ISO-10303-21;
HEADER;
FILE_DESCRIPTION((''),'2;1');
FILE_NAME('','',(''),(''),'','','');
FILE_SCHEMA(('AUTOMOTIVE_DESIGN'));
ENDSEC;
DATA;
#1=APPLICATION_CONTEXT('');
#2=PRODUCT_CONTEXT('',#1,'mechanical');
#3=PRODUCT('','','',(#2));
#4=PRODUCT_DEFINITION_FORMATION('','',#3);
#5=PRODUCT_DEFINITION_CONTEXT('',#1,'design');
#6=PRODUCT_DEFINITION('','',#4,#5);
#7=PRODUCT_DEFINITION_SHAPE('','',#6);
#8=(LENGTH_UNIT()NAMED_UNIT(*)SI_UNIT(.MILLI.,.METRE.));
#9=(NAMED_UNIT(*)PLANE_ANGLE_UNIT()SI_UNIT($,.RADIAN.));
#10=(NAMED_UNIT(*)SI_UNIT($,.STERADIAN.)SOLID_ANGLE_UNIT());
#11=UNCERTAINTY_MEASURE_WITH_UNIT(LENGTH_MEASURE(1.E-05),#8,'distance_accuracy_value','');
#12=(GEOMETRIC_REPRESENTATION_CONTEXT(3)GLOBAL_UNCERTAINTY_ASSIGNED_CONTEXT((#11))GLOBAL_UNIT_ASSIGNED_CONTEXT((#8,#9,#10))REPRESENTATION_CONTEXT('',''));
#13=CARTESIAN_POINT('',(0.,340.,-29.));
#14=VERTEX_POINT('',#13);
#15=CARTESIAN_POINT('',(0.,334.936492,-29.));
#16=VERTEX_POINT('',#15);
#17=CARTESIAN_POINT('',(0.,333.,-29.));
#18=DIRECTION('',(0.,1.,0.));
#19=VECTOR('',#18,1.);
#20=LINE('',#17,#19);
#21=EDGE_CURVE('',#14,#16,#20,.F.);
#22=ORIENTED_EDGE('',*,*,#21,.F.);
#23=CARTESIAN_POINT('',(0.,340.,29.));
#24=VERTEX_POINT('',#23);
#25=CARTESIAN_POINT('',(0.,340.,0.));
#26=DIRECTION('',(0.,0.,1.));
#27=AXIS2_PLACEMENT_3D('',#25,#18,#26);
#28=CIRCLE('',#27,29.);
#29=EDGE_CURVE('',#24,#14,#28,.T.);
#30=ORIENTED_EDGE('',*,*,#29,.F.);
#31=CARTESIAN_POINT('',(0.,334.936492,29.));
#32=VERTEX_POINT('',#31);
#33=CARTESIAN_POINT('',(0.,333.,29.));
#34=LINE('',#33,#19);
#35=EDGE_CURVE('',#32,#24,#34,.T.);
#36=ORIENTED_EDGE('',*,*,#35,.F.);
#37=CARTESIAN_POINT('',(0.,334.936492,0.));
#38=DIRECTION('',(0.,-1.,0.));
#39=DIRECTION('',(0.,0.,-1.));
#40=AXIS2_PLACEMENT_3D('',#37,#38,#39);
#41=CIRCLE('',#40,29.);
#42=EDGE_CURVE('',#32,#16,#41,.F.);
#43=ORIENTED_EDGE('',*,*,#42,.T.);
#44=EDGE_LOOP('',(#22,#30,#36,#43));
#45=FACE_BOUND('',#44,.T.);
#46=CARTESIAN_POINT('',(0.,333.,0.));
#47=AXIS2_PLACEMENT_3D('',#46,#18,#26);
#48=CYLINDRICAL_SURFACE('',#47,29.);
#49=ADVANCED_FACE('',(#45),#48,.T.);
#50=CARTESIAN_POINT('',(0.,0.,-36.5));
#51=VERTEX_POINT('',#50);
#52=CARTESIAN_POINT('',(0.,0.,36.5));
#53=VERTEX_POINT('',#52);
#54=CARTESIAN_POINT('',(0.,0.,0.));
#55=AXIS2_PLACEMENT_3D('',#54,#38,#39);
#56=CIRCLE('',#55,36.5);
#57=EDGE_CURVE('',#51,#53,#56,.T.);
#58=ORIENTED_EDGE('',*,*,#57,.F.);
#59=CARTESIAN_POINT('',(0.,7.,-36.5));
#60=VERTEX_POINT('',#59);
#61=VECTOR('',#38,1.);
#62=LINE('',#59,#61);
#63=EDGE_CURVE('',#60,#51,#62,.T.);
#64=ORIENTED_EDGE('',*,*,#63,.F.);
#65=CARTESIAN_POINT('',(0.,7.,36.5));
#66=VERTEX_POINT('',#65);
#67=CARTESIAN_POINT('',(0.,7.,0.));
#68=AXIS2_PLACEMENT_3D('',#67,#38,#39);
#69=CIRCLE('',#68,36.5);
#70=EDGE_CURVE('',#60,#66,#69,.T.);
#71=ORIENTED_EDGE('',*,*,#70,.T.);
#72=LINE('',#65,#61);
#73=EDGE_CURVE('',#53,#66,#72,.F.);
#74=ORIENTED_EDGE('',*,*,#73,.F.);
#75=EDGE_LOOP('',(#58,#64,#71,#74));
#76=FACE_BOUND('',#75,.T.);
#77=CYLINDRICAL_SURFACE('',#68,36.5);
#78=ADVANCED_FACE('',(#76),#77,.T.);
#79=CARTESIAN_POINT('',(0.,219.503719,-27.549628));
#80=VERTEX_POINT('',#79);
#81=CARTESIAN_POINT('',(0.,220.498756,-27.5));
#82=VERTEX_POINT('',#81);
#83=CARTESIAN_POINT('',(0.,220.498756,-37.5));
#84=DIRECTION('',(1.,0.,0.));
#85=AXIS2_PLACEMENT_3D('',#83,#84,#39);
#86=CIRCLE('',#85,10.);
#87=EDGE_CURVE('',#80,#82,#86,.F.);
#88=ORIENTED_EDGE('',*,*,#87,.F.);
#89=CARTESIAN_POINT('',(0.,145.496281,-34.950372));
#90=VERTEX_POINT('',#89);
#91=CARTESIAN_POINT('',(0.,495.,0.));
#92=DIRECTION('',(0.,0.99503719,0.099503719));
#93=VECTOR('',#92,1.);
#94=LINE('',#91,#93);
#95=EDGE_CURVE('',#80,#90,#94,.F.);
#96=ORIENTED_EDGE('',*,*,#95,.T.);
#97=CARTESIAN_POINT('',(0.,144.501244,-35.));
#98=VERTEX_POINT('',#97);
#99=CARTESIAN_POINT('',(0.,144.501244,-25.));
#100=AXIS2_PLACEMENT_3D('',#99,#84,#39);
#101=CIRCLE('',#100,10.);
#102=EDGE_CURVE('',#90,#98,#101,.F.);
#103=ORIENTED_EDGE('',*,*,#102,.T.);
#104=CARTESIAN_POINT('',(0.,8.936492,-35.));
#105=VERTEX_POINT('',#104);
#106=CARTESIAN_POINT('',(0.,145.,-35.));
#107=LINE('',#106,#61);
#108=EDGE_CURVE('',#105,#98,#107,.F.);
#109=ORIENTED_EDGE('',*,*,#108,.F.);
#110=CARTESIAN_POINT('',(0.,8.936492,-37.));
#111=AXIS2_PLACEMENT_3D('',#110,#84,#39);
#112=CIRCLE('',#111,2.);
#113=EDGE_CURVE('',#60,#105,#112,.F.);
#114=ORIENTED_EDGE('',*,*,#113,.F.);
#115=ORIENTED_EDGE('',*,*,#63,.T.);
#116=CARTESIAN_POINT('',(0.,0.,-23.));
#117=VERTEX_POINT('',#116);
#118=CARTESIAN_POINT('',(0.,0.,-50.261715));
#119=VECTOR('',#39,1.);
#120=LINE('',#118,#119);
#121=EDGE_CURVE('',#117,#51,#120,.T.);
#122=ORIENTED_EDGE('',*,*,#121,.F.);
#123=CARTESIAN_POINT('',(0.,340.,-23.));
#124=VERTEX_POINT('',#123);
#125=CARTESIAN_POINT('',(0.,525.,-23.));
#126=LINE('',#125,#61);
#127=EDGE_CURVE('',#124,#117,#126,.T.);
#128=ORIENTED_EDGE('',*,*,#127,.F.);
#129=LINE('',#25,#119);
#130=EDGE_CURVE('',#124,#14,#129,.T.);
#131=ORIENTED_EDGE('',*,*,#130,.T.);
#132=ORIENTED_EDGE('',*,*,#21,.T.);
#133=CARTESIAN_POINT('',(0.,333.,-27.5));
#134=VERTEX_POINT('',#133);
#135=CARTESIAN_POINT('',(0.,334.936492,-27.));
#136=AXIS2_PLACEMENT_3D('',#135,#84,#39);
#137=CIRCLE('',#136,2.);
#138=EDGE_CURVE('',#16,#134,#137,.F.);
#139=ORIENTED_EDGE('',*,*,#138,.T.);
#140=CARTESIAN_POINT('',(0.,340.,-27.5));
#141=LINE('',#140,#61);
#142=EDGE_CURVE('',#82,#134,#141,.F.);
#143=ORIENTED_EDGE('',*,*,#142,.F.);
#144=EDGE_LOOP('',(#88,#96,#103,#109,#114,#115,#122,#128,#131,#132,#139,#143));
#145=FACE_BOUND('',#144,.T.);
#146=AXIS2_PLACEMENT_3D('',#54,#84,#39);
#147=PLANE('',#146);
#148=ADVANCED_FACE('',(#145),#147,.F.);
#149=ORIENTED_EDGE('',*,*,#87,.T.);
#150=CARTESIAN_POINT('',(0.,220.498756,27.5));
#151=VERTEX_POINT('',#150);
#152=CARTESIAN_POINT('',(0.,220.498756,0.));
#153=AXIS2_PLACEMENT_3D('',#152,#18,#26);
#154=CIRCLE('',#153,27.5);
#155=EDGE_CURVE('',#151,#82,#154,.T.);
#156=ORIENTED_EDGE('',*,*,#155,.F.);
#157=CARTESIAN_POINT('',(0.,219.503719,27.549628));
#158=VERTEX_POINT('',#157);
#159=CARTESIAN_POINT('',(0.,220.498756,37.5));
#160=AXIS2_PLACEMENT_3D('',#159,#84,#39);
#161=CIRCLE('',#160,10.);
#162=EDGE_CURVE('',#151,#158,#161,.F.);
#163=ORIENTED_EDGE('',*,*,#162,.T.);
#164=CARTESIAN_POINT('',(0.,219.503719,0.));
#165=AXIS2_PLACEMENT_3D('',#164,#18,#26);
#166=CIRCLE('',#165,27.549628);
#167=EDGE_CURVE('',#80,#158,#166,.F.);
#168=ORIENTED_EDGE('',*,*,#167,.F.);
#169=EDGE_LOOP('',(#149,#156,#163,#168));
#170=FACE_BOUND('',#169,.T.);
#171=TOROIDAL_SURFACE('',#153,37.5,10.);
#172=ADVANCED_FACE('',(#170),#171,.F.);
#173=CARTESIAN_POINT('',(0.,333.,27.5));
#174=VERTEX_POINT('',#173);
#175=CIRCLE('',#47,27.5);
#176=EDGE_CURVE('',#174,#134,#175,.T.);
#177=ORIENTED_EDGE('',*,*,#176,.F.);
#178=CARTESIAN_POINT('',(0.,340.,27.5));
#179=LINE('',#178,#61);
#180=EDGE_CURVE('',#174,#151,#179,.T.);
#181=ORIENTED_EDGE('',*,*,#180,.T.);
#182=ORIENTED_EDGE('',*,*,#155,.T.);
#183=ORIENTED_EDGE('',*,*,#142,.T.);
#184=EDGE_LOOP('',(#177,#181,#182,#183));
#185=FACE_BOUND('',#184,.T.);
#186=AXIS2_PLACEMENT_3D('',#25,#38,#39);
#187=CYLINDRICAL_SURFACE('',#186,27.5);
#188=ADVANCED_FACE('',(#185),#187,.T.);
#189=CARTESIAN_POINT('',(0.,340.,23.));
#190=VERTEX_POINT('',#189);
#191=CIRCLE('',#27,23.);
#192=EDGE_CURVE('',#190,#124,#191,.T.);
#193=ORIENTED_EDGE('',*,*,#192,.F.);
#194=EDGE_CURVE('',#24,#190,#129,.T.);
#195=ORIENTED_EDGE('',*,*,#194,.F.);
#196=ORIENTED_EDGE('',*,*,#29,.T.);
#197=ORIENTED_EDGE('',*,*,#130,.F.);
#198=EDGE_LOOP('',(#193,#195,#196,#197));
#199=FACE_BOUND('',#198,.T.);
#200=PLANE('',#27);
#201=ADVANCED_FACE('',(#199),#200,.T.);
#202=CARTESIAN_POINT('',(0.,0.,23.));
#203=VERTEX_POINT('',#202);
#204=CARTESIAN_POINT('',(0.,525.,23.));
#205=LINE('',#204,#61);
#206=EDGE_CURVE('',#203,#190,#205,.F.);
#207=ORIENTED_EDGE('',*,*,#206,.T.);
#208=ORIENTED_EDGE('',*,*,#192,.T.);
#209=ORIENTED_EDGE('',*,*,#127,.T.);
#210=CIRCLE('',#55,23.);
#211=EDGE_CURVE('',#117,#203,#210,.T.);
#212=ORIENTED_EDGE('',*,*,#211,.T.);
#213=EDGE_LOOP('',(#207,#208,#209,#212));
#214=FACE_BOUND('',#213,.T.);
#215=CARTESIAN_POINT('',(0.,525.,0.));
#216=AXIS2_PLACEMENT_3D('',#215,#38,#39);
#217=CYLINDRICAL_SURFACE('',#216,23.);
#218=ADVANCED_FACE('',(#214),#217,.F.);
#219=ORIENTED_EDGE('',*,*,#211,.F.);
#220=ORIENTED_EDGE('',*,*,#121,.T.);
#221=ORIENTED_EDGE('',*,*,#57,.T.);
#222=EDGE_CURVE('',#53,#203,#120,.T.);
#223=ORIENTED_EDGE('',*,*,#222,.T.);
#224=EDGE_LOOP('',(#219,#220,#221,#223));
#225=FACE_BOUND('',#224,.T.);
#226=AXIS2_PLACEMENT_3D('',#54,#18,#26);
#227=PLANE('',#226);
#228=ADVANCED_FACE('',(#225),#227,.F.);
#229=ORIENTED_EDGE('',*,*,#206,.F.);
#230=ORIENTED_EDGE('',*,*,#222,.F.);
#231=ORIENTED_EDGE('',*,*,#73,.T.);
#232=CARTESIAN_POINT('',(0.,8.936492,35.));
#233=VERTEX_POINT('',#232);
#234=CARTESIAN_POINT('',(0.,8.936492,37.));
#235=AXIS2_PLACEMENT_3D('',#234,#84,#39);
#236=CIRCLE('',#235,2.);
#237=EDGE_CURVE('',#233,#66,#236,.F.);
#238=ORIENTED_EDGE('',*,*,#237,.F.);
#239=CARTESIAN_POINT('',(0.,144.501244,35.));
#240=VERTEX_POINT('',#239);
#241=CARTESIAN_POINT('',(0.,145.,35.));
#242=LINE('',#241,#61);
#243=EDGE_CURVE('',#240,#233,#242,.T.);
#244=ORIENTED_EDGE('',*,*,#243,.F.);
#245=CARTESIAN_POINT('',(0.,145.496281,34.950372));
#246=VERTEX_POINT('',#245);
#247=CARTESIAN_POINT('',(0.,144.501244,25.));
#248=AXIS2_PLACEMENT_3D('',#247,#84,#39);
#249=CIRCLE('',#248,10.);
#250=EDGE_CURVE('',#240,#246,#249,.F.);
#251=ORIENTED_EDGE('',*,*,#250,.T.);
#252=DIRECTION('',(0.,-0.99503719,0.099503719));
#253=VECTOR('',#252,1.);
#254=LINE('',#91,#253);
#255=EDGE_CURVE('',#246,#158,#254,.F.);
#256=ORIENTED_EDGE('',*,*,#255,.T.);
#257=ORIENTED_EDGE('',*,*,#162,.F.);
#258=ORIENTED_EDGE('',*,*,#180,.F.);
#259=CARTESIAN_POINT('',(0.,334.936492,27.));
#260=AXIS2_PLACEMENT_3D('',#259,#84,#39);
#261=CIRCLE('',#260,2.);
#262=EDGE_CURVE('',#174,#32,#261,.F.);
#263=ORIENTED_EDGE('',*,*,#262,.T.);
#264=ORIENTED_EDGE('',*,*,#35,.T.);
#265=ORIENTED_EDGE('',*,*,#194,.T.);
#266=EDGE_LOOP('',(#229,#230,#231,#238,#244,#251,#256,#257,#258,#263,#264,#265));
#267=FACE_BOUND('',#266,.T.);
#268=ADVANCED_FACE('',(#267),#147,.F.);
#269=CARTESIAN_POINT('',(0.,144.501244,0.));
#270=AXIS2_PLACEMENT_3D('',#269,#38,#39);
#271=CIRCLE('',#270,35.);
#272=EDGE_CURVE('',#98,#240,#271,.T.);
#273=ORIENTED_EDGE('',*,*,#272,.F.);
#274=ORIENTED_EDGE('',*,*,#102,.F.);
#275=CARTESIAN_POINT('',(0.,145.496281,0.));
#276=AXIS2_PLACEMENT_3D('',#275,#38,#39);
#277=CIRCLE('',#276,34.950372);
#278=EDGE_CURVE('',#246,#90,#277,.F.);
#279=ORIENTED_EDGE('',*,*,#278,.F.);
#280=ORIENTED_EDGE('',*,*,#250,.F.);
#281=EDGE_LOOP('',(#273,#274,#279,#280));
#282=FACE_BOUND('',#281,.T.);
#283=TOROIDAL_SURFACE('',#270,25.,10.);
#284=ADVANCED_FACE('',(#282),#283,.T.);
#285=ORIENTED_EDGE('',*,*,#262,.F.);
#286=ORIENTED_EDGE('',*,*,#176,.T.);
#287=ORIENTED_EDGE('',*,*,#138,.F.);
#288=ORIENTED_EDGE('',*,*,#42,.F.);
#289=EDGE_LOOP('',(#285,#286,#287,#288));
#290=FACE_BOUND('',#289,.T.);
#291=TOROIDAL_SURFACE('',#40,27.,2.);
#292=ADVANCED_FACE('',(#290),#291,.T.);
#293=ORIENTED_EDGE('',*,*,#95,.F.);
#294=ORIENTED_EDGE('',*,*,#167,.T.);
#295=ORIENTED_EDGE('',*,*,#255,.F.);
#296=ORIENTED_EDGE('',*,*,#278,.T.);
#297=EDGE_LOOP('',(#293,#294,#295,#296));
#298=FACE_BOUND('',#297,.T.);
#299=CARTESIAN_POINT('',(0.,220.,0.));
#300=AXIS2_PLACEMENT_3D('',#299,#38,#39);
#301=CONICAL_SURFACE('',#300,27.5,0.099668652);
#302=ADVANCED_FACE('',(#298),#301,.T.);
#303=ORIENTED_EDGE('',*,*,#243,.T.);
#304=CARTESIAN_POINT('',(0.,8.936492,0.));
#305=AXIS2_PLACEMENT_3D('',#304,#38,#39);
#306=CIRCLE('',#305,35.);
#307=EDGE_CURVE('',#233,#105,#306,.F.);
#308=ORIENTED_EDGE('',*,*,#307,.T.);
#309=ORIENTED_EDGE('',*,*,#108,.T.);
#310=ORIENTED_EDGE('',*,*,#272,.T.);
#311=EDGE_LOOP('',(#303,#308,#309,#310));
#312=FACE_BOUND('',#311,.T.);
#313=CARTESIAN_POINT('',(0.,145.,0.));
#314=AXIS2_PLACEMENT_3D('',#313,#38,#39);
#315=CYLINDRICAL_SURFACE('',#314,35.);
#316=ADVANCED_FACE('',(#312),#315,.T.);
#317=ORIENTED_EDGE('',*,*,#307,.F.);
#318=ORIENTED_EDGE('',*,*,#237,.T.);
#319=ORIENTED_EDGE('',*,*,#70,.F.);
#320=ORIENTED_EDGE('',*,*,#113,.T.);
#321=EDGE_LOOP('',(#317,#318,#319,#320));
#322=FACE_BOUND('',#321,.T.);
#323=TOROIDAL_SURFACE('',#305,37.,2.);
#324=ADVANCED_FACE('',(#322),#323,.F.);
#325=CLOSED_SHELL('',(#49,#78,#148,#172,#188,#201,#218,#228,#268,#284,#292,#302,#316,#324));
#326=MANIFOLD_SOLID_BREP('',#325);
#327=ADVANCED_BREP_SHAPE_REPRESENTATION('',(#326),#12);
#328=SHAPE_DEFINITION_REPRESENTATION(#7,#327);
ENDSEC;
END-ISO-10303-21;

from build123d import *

# Parameters (mm, degrees)
CROQUIS1_R              = 35
SALIENTE_EXTRUIR1_DEPTH = 145
CROQUIS2_R              = 27.5
CROQUIS3_R              = 27.5
SALIENTE_EXTRUIR2_DEPTH = 120
CROQUIS5_R              = 36.5
SALIENTE_EXTRUIR3_DEPTH = 7
CROQUIS4_R              = 23
CORTAR_EXTRUIR1_DEPTH   = 525
REDONDEO1_R             = 10
SALIENTE_EXTRUIR4_START = -7
CROQUIS6_R              = 29
CROQUIS6_R_2            = 23
SALIENTE_EXTRUIR4_DEPTH = 7
REDONDEO2_R             = 2
CROQUIS7_W              = 119.738645001
CROQUIS7_H              = 395.389304841
CORTAR_EXTRUIR2_DEPTH   = 93


with BuildPart() as part:
    # Croquis1 → Saliente-Extruir1 (new body)
    with BuildSketch(Plane(origin=(0, 0, 0), x_dir=(1, 0, 0), z_dir=(0, 1, 0))):
        with Locations(Location((0, 0, 0), (0, 0, 270))):
            Circle(CROQUIS1_R)
    extrude(amount=SALIENTE_EXTRUIR1_DEPTH)

    # Croquis2 → section 1 of recubrir1
    with BuildSketch(Plane(origin=(0, 220, 0), x_dir=(1, 0, 0), z_dir=(0, 1, 0)), mode=Mode.PRIVATE) as recubrir1_s1:
        Circle(CROQUIS2_R)
    # loft up to a face of the part (recubrir1)
    loft([Face(Wire([part.edges().sort_by_distance((25.51390196, 145, -23.959148708))[0]])), recubrir1_s1.sketch])

    # Croquis3 → Saliente-Extruir2 (add)
    with BuildSketch(Plane(origin=(0, 220, 0), x_dir=(1, 0, 0), z_dir=(0, 1, 0))):
        with Locations(Location((0, 0, 0), (0, 0, 270))):
            Circle(CROQUIS3_R)
    extrude(amount=SALIENTE_EXTRUIR2_DEPTH)

    # Croquis5 → Saliente-Extruir3 (add)
    with BuildSketch(Plane.XZ):
        with Locations(Location((0, 0, 0), (0, 0, 270))):
            Circle(CROQUIS5_R)
    extrude(amount=-SALIENTE_EXTRUIR3_DEPTH)

    # Croquis4 → Cortar-Extruir1 (cut)
    with BuildSketch(Plane.XZ):
        with Locations(Location((0, 0, 0), (0, 0, 270))):
            Circle(CROQUIS4_R)
    extrude(amount=-CORTAR_EXTRUIR1_DEPTH, mode=Mode.SUBTRACT)

    # Redondeo1
    # the kernel refuses this fillet: 10 mm, written as the material it adds along each edge
    with BuildSketch(Plane(origin=(0, 220, 0), x_dir=(0, 0, 1), z_dir=(1, 0, 0))) as redondeo1_piece_1:
        with BuildLine():
            CenterArc((27.5 + REDONDEO1_R, -REDONDEO1_R * 0.0498756211209), REDONDEO1_R, 174.289406863, 5.710593137)
            Line((27.5 + REDONDEO1_R * 0.00496280979001, REDONDEO1_R * 0.0496280979001), (27.5, 0))
            Line((27.5, 0), (27.5, -REDONDEO1_R * 0.0498756211209))
        make_face()
    revolve(axis=Axis((0, 220, 0), (0, -1, 0)))
    # the kernel refuses this fillet: 10 mm, written as the material it takes off along each edge
    with BuildSketch(Plane(origin=(0, 145, 0), x_dir=(0, 0, 1), z_dir=(-1, 0, 0))) as redondeo1_2_piece_1:
        with BuildLine():
            CenterArc((35 - REDONDEO1_R, -REDONDEO1_R * 0.0498756211209), REDONDEO1_R, 0, 5.710593137)
            Line((35 - REDONDEO1_R * 0.00496280979001, REDONDEO1_R * 0.0496280979001), (35, 0))
            Line((35, 0), (35, -REDONDEO1_R * 0.0498756211209))
        make_face()
    revolve(axis=Axis((0, 145, 0), (0, 1, 0)), mode=Mode.SUBTRACT)

    # Croquis6 → Saliente-Extruir4 (add)
    with BuildSketch(Plane(origin=(0, 340, 0), x_dir=(1, 0, 0), z_dir=(0, 1, 0)).offset(SALIENTE_EXTRUIR4_START)):
        with Locations(Location((0, 0, 0), (0, 0, 270))):
            Circle(CROQUIS6_R)
        with Locations(Location((0, 0, 0), (0, 0, 90))):
            Circle(CROQUIS6_R_2, mode=Mode.SUBTRACT)
    extrude(amount=SALIENTE_EXTRUIR4_DEPTH)

    # Redondeo2
    # the kernel refuses this fillet: 2 mm, written as the material it adds along each edge
    with BuildSketch(Plane(origin=(0, 7, 0), x_dir=(0, 0, 1), z_dir=(1, 0, 0))) as redondeo2_piece_1:
        with BuildLine():
            CenterArc((37, -1.936491673), REDONDEO2_R, 104.477512186, 75.522487814)
            Line((35, -1.936491673), (34.96, -1.936491673))
            Line((34.96, -1.936491673), (34.96, 0))
            Line((34.96, 0), (35, 0.04))
            ThreePointArc((35, 0.04), (35.75, 0.04), (36.49, 0.038729833))
            Line((36.49, 0.038729833), (36.5, 0))
        make_face()
    revolve(axis=Axis((0, 7, 0), (0, -1, 0)))
    # the kernel refuses this fillet: 2 mm, written as the material it takes off along each edge
    with BuildSketch(Plane(origin=(0, 333, 0), x_dir=(0, 0, 1), z_dir=(-1, 0, 0))) as redondeo2_2_piece_1:
        with BuildLine():
            CenterArc((27, 1.936491673), REDONDEO2_R, 284.477512186, 75.522487814)
            Line((29, 1.936491673), (29.04, 1.936491673))
            Line((29.04, 1.936491673), (29.04, 0))
            Line((29.04, 0), (29, -0.04))
            ThreePointArc((29, -0.04), (28.25, -0.04), (27.51, -0.038729833))
            Line((27.51, -0.038729833), (27.5, 0))
        make_face()
    revolve(axis=Axis((0, 333, 0), (0, 1, 0)), mode=Mode.SUBTRACT)

    # Croquis7 → Cortar-Extruir2 (cut)
    with BuildSketch(Plane(origin=(0, 0, 0), x_dir=(0, 0, -1), z_dir=(1, 0, 0))):
        with Locations((-9.607607261, 197.694652421)):
            Rectangle(CROQUIS7_W, CROQUIS7_H)
    extrude(amount=-CORTAR_EXTRUIR2_DEPTH, mode=Mode.SUBTRACT)


solid = part.part
